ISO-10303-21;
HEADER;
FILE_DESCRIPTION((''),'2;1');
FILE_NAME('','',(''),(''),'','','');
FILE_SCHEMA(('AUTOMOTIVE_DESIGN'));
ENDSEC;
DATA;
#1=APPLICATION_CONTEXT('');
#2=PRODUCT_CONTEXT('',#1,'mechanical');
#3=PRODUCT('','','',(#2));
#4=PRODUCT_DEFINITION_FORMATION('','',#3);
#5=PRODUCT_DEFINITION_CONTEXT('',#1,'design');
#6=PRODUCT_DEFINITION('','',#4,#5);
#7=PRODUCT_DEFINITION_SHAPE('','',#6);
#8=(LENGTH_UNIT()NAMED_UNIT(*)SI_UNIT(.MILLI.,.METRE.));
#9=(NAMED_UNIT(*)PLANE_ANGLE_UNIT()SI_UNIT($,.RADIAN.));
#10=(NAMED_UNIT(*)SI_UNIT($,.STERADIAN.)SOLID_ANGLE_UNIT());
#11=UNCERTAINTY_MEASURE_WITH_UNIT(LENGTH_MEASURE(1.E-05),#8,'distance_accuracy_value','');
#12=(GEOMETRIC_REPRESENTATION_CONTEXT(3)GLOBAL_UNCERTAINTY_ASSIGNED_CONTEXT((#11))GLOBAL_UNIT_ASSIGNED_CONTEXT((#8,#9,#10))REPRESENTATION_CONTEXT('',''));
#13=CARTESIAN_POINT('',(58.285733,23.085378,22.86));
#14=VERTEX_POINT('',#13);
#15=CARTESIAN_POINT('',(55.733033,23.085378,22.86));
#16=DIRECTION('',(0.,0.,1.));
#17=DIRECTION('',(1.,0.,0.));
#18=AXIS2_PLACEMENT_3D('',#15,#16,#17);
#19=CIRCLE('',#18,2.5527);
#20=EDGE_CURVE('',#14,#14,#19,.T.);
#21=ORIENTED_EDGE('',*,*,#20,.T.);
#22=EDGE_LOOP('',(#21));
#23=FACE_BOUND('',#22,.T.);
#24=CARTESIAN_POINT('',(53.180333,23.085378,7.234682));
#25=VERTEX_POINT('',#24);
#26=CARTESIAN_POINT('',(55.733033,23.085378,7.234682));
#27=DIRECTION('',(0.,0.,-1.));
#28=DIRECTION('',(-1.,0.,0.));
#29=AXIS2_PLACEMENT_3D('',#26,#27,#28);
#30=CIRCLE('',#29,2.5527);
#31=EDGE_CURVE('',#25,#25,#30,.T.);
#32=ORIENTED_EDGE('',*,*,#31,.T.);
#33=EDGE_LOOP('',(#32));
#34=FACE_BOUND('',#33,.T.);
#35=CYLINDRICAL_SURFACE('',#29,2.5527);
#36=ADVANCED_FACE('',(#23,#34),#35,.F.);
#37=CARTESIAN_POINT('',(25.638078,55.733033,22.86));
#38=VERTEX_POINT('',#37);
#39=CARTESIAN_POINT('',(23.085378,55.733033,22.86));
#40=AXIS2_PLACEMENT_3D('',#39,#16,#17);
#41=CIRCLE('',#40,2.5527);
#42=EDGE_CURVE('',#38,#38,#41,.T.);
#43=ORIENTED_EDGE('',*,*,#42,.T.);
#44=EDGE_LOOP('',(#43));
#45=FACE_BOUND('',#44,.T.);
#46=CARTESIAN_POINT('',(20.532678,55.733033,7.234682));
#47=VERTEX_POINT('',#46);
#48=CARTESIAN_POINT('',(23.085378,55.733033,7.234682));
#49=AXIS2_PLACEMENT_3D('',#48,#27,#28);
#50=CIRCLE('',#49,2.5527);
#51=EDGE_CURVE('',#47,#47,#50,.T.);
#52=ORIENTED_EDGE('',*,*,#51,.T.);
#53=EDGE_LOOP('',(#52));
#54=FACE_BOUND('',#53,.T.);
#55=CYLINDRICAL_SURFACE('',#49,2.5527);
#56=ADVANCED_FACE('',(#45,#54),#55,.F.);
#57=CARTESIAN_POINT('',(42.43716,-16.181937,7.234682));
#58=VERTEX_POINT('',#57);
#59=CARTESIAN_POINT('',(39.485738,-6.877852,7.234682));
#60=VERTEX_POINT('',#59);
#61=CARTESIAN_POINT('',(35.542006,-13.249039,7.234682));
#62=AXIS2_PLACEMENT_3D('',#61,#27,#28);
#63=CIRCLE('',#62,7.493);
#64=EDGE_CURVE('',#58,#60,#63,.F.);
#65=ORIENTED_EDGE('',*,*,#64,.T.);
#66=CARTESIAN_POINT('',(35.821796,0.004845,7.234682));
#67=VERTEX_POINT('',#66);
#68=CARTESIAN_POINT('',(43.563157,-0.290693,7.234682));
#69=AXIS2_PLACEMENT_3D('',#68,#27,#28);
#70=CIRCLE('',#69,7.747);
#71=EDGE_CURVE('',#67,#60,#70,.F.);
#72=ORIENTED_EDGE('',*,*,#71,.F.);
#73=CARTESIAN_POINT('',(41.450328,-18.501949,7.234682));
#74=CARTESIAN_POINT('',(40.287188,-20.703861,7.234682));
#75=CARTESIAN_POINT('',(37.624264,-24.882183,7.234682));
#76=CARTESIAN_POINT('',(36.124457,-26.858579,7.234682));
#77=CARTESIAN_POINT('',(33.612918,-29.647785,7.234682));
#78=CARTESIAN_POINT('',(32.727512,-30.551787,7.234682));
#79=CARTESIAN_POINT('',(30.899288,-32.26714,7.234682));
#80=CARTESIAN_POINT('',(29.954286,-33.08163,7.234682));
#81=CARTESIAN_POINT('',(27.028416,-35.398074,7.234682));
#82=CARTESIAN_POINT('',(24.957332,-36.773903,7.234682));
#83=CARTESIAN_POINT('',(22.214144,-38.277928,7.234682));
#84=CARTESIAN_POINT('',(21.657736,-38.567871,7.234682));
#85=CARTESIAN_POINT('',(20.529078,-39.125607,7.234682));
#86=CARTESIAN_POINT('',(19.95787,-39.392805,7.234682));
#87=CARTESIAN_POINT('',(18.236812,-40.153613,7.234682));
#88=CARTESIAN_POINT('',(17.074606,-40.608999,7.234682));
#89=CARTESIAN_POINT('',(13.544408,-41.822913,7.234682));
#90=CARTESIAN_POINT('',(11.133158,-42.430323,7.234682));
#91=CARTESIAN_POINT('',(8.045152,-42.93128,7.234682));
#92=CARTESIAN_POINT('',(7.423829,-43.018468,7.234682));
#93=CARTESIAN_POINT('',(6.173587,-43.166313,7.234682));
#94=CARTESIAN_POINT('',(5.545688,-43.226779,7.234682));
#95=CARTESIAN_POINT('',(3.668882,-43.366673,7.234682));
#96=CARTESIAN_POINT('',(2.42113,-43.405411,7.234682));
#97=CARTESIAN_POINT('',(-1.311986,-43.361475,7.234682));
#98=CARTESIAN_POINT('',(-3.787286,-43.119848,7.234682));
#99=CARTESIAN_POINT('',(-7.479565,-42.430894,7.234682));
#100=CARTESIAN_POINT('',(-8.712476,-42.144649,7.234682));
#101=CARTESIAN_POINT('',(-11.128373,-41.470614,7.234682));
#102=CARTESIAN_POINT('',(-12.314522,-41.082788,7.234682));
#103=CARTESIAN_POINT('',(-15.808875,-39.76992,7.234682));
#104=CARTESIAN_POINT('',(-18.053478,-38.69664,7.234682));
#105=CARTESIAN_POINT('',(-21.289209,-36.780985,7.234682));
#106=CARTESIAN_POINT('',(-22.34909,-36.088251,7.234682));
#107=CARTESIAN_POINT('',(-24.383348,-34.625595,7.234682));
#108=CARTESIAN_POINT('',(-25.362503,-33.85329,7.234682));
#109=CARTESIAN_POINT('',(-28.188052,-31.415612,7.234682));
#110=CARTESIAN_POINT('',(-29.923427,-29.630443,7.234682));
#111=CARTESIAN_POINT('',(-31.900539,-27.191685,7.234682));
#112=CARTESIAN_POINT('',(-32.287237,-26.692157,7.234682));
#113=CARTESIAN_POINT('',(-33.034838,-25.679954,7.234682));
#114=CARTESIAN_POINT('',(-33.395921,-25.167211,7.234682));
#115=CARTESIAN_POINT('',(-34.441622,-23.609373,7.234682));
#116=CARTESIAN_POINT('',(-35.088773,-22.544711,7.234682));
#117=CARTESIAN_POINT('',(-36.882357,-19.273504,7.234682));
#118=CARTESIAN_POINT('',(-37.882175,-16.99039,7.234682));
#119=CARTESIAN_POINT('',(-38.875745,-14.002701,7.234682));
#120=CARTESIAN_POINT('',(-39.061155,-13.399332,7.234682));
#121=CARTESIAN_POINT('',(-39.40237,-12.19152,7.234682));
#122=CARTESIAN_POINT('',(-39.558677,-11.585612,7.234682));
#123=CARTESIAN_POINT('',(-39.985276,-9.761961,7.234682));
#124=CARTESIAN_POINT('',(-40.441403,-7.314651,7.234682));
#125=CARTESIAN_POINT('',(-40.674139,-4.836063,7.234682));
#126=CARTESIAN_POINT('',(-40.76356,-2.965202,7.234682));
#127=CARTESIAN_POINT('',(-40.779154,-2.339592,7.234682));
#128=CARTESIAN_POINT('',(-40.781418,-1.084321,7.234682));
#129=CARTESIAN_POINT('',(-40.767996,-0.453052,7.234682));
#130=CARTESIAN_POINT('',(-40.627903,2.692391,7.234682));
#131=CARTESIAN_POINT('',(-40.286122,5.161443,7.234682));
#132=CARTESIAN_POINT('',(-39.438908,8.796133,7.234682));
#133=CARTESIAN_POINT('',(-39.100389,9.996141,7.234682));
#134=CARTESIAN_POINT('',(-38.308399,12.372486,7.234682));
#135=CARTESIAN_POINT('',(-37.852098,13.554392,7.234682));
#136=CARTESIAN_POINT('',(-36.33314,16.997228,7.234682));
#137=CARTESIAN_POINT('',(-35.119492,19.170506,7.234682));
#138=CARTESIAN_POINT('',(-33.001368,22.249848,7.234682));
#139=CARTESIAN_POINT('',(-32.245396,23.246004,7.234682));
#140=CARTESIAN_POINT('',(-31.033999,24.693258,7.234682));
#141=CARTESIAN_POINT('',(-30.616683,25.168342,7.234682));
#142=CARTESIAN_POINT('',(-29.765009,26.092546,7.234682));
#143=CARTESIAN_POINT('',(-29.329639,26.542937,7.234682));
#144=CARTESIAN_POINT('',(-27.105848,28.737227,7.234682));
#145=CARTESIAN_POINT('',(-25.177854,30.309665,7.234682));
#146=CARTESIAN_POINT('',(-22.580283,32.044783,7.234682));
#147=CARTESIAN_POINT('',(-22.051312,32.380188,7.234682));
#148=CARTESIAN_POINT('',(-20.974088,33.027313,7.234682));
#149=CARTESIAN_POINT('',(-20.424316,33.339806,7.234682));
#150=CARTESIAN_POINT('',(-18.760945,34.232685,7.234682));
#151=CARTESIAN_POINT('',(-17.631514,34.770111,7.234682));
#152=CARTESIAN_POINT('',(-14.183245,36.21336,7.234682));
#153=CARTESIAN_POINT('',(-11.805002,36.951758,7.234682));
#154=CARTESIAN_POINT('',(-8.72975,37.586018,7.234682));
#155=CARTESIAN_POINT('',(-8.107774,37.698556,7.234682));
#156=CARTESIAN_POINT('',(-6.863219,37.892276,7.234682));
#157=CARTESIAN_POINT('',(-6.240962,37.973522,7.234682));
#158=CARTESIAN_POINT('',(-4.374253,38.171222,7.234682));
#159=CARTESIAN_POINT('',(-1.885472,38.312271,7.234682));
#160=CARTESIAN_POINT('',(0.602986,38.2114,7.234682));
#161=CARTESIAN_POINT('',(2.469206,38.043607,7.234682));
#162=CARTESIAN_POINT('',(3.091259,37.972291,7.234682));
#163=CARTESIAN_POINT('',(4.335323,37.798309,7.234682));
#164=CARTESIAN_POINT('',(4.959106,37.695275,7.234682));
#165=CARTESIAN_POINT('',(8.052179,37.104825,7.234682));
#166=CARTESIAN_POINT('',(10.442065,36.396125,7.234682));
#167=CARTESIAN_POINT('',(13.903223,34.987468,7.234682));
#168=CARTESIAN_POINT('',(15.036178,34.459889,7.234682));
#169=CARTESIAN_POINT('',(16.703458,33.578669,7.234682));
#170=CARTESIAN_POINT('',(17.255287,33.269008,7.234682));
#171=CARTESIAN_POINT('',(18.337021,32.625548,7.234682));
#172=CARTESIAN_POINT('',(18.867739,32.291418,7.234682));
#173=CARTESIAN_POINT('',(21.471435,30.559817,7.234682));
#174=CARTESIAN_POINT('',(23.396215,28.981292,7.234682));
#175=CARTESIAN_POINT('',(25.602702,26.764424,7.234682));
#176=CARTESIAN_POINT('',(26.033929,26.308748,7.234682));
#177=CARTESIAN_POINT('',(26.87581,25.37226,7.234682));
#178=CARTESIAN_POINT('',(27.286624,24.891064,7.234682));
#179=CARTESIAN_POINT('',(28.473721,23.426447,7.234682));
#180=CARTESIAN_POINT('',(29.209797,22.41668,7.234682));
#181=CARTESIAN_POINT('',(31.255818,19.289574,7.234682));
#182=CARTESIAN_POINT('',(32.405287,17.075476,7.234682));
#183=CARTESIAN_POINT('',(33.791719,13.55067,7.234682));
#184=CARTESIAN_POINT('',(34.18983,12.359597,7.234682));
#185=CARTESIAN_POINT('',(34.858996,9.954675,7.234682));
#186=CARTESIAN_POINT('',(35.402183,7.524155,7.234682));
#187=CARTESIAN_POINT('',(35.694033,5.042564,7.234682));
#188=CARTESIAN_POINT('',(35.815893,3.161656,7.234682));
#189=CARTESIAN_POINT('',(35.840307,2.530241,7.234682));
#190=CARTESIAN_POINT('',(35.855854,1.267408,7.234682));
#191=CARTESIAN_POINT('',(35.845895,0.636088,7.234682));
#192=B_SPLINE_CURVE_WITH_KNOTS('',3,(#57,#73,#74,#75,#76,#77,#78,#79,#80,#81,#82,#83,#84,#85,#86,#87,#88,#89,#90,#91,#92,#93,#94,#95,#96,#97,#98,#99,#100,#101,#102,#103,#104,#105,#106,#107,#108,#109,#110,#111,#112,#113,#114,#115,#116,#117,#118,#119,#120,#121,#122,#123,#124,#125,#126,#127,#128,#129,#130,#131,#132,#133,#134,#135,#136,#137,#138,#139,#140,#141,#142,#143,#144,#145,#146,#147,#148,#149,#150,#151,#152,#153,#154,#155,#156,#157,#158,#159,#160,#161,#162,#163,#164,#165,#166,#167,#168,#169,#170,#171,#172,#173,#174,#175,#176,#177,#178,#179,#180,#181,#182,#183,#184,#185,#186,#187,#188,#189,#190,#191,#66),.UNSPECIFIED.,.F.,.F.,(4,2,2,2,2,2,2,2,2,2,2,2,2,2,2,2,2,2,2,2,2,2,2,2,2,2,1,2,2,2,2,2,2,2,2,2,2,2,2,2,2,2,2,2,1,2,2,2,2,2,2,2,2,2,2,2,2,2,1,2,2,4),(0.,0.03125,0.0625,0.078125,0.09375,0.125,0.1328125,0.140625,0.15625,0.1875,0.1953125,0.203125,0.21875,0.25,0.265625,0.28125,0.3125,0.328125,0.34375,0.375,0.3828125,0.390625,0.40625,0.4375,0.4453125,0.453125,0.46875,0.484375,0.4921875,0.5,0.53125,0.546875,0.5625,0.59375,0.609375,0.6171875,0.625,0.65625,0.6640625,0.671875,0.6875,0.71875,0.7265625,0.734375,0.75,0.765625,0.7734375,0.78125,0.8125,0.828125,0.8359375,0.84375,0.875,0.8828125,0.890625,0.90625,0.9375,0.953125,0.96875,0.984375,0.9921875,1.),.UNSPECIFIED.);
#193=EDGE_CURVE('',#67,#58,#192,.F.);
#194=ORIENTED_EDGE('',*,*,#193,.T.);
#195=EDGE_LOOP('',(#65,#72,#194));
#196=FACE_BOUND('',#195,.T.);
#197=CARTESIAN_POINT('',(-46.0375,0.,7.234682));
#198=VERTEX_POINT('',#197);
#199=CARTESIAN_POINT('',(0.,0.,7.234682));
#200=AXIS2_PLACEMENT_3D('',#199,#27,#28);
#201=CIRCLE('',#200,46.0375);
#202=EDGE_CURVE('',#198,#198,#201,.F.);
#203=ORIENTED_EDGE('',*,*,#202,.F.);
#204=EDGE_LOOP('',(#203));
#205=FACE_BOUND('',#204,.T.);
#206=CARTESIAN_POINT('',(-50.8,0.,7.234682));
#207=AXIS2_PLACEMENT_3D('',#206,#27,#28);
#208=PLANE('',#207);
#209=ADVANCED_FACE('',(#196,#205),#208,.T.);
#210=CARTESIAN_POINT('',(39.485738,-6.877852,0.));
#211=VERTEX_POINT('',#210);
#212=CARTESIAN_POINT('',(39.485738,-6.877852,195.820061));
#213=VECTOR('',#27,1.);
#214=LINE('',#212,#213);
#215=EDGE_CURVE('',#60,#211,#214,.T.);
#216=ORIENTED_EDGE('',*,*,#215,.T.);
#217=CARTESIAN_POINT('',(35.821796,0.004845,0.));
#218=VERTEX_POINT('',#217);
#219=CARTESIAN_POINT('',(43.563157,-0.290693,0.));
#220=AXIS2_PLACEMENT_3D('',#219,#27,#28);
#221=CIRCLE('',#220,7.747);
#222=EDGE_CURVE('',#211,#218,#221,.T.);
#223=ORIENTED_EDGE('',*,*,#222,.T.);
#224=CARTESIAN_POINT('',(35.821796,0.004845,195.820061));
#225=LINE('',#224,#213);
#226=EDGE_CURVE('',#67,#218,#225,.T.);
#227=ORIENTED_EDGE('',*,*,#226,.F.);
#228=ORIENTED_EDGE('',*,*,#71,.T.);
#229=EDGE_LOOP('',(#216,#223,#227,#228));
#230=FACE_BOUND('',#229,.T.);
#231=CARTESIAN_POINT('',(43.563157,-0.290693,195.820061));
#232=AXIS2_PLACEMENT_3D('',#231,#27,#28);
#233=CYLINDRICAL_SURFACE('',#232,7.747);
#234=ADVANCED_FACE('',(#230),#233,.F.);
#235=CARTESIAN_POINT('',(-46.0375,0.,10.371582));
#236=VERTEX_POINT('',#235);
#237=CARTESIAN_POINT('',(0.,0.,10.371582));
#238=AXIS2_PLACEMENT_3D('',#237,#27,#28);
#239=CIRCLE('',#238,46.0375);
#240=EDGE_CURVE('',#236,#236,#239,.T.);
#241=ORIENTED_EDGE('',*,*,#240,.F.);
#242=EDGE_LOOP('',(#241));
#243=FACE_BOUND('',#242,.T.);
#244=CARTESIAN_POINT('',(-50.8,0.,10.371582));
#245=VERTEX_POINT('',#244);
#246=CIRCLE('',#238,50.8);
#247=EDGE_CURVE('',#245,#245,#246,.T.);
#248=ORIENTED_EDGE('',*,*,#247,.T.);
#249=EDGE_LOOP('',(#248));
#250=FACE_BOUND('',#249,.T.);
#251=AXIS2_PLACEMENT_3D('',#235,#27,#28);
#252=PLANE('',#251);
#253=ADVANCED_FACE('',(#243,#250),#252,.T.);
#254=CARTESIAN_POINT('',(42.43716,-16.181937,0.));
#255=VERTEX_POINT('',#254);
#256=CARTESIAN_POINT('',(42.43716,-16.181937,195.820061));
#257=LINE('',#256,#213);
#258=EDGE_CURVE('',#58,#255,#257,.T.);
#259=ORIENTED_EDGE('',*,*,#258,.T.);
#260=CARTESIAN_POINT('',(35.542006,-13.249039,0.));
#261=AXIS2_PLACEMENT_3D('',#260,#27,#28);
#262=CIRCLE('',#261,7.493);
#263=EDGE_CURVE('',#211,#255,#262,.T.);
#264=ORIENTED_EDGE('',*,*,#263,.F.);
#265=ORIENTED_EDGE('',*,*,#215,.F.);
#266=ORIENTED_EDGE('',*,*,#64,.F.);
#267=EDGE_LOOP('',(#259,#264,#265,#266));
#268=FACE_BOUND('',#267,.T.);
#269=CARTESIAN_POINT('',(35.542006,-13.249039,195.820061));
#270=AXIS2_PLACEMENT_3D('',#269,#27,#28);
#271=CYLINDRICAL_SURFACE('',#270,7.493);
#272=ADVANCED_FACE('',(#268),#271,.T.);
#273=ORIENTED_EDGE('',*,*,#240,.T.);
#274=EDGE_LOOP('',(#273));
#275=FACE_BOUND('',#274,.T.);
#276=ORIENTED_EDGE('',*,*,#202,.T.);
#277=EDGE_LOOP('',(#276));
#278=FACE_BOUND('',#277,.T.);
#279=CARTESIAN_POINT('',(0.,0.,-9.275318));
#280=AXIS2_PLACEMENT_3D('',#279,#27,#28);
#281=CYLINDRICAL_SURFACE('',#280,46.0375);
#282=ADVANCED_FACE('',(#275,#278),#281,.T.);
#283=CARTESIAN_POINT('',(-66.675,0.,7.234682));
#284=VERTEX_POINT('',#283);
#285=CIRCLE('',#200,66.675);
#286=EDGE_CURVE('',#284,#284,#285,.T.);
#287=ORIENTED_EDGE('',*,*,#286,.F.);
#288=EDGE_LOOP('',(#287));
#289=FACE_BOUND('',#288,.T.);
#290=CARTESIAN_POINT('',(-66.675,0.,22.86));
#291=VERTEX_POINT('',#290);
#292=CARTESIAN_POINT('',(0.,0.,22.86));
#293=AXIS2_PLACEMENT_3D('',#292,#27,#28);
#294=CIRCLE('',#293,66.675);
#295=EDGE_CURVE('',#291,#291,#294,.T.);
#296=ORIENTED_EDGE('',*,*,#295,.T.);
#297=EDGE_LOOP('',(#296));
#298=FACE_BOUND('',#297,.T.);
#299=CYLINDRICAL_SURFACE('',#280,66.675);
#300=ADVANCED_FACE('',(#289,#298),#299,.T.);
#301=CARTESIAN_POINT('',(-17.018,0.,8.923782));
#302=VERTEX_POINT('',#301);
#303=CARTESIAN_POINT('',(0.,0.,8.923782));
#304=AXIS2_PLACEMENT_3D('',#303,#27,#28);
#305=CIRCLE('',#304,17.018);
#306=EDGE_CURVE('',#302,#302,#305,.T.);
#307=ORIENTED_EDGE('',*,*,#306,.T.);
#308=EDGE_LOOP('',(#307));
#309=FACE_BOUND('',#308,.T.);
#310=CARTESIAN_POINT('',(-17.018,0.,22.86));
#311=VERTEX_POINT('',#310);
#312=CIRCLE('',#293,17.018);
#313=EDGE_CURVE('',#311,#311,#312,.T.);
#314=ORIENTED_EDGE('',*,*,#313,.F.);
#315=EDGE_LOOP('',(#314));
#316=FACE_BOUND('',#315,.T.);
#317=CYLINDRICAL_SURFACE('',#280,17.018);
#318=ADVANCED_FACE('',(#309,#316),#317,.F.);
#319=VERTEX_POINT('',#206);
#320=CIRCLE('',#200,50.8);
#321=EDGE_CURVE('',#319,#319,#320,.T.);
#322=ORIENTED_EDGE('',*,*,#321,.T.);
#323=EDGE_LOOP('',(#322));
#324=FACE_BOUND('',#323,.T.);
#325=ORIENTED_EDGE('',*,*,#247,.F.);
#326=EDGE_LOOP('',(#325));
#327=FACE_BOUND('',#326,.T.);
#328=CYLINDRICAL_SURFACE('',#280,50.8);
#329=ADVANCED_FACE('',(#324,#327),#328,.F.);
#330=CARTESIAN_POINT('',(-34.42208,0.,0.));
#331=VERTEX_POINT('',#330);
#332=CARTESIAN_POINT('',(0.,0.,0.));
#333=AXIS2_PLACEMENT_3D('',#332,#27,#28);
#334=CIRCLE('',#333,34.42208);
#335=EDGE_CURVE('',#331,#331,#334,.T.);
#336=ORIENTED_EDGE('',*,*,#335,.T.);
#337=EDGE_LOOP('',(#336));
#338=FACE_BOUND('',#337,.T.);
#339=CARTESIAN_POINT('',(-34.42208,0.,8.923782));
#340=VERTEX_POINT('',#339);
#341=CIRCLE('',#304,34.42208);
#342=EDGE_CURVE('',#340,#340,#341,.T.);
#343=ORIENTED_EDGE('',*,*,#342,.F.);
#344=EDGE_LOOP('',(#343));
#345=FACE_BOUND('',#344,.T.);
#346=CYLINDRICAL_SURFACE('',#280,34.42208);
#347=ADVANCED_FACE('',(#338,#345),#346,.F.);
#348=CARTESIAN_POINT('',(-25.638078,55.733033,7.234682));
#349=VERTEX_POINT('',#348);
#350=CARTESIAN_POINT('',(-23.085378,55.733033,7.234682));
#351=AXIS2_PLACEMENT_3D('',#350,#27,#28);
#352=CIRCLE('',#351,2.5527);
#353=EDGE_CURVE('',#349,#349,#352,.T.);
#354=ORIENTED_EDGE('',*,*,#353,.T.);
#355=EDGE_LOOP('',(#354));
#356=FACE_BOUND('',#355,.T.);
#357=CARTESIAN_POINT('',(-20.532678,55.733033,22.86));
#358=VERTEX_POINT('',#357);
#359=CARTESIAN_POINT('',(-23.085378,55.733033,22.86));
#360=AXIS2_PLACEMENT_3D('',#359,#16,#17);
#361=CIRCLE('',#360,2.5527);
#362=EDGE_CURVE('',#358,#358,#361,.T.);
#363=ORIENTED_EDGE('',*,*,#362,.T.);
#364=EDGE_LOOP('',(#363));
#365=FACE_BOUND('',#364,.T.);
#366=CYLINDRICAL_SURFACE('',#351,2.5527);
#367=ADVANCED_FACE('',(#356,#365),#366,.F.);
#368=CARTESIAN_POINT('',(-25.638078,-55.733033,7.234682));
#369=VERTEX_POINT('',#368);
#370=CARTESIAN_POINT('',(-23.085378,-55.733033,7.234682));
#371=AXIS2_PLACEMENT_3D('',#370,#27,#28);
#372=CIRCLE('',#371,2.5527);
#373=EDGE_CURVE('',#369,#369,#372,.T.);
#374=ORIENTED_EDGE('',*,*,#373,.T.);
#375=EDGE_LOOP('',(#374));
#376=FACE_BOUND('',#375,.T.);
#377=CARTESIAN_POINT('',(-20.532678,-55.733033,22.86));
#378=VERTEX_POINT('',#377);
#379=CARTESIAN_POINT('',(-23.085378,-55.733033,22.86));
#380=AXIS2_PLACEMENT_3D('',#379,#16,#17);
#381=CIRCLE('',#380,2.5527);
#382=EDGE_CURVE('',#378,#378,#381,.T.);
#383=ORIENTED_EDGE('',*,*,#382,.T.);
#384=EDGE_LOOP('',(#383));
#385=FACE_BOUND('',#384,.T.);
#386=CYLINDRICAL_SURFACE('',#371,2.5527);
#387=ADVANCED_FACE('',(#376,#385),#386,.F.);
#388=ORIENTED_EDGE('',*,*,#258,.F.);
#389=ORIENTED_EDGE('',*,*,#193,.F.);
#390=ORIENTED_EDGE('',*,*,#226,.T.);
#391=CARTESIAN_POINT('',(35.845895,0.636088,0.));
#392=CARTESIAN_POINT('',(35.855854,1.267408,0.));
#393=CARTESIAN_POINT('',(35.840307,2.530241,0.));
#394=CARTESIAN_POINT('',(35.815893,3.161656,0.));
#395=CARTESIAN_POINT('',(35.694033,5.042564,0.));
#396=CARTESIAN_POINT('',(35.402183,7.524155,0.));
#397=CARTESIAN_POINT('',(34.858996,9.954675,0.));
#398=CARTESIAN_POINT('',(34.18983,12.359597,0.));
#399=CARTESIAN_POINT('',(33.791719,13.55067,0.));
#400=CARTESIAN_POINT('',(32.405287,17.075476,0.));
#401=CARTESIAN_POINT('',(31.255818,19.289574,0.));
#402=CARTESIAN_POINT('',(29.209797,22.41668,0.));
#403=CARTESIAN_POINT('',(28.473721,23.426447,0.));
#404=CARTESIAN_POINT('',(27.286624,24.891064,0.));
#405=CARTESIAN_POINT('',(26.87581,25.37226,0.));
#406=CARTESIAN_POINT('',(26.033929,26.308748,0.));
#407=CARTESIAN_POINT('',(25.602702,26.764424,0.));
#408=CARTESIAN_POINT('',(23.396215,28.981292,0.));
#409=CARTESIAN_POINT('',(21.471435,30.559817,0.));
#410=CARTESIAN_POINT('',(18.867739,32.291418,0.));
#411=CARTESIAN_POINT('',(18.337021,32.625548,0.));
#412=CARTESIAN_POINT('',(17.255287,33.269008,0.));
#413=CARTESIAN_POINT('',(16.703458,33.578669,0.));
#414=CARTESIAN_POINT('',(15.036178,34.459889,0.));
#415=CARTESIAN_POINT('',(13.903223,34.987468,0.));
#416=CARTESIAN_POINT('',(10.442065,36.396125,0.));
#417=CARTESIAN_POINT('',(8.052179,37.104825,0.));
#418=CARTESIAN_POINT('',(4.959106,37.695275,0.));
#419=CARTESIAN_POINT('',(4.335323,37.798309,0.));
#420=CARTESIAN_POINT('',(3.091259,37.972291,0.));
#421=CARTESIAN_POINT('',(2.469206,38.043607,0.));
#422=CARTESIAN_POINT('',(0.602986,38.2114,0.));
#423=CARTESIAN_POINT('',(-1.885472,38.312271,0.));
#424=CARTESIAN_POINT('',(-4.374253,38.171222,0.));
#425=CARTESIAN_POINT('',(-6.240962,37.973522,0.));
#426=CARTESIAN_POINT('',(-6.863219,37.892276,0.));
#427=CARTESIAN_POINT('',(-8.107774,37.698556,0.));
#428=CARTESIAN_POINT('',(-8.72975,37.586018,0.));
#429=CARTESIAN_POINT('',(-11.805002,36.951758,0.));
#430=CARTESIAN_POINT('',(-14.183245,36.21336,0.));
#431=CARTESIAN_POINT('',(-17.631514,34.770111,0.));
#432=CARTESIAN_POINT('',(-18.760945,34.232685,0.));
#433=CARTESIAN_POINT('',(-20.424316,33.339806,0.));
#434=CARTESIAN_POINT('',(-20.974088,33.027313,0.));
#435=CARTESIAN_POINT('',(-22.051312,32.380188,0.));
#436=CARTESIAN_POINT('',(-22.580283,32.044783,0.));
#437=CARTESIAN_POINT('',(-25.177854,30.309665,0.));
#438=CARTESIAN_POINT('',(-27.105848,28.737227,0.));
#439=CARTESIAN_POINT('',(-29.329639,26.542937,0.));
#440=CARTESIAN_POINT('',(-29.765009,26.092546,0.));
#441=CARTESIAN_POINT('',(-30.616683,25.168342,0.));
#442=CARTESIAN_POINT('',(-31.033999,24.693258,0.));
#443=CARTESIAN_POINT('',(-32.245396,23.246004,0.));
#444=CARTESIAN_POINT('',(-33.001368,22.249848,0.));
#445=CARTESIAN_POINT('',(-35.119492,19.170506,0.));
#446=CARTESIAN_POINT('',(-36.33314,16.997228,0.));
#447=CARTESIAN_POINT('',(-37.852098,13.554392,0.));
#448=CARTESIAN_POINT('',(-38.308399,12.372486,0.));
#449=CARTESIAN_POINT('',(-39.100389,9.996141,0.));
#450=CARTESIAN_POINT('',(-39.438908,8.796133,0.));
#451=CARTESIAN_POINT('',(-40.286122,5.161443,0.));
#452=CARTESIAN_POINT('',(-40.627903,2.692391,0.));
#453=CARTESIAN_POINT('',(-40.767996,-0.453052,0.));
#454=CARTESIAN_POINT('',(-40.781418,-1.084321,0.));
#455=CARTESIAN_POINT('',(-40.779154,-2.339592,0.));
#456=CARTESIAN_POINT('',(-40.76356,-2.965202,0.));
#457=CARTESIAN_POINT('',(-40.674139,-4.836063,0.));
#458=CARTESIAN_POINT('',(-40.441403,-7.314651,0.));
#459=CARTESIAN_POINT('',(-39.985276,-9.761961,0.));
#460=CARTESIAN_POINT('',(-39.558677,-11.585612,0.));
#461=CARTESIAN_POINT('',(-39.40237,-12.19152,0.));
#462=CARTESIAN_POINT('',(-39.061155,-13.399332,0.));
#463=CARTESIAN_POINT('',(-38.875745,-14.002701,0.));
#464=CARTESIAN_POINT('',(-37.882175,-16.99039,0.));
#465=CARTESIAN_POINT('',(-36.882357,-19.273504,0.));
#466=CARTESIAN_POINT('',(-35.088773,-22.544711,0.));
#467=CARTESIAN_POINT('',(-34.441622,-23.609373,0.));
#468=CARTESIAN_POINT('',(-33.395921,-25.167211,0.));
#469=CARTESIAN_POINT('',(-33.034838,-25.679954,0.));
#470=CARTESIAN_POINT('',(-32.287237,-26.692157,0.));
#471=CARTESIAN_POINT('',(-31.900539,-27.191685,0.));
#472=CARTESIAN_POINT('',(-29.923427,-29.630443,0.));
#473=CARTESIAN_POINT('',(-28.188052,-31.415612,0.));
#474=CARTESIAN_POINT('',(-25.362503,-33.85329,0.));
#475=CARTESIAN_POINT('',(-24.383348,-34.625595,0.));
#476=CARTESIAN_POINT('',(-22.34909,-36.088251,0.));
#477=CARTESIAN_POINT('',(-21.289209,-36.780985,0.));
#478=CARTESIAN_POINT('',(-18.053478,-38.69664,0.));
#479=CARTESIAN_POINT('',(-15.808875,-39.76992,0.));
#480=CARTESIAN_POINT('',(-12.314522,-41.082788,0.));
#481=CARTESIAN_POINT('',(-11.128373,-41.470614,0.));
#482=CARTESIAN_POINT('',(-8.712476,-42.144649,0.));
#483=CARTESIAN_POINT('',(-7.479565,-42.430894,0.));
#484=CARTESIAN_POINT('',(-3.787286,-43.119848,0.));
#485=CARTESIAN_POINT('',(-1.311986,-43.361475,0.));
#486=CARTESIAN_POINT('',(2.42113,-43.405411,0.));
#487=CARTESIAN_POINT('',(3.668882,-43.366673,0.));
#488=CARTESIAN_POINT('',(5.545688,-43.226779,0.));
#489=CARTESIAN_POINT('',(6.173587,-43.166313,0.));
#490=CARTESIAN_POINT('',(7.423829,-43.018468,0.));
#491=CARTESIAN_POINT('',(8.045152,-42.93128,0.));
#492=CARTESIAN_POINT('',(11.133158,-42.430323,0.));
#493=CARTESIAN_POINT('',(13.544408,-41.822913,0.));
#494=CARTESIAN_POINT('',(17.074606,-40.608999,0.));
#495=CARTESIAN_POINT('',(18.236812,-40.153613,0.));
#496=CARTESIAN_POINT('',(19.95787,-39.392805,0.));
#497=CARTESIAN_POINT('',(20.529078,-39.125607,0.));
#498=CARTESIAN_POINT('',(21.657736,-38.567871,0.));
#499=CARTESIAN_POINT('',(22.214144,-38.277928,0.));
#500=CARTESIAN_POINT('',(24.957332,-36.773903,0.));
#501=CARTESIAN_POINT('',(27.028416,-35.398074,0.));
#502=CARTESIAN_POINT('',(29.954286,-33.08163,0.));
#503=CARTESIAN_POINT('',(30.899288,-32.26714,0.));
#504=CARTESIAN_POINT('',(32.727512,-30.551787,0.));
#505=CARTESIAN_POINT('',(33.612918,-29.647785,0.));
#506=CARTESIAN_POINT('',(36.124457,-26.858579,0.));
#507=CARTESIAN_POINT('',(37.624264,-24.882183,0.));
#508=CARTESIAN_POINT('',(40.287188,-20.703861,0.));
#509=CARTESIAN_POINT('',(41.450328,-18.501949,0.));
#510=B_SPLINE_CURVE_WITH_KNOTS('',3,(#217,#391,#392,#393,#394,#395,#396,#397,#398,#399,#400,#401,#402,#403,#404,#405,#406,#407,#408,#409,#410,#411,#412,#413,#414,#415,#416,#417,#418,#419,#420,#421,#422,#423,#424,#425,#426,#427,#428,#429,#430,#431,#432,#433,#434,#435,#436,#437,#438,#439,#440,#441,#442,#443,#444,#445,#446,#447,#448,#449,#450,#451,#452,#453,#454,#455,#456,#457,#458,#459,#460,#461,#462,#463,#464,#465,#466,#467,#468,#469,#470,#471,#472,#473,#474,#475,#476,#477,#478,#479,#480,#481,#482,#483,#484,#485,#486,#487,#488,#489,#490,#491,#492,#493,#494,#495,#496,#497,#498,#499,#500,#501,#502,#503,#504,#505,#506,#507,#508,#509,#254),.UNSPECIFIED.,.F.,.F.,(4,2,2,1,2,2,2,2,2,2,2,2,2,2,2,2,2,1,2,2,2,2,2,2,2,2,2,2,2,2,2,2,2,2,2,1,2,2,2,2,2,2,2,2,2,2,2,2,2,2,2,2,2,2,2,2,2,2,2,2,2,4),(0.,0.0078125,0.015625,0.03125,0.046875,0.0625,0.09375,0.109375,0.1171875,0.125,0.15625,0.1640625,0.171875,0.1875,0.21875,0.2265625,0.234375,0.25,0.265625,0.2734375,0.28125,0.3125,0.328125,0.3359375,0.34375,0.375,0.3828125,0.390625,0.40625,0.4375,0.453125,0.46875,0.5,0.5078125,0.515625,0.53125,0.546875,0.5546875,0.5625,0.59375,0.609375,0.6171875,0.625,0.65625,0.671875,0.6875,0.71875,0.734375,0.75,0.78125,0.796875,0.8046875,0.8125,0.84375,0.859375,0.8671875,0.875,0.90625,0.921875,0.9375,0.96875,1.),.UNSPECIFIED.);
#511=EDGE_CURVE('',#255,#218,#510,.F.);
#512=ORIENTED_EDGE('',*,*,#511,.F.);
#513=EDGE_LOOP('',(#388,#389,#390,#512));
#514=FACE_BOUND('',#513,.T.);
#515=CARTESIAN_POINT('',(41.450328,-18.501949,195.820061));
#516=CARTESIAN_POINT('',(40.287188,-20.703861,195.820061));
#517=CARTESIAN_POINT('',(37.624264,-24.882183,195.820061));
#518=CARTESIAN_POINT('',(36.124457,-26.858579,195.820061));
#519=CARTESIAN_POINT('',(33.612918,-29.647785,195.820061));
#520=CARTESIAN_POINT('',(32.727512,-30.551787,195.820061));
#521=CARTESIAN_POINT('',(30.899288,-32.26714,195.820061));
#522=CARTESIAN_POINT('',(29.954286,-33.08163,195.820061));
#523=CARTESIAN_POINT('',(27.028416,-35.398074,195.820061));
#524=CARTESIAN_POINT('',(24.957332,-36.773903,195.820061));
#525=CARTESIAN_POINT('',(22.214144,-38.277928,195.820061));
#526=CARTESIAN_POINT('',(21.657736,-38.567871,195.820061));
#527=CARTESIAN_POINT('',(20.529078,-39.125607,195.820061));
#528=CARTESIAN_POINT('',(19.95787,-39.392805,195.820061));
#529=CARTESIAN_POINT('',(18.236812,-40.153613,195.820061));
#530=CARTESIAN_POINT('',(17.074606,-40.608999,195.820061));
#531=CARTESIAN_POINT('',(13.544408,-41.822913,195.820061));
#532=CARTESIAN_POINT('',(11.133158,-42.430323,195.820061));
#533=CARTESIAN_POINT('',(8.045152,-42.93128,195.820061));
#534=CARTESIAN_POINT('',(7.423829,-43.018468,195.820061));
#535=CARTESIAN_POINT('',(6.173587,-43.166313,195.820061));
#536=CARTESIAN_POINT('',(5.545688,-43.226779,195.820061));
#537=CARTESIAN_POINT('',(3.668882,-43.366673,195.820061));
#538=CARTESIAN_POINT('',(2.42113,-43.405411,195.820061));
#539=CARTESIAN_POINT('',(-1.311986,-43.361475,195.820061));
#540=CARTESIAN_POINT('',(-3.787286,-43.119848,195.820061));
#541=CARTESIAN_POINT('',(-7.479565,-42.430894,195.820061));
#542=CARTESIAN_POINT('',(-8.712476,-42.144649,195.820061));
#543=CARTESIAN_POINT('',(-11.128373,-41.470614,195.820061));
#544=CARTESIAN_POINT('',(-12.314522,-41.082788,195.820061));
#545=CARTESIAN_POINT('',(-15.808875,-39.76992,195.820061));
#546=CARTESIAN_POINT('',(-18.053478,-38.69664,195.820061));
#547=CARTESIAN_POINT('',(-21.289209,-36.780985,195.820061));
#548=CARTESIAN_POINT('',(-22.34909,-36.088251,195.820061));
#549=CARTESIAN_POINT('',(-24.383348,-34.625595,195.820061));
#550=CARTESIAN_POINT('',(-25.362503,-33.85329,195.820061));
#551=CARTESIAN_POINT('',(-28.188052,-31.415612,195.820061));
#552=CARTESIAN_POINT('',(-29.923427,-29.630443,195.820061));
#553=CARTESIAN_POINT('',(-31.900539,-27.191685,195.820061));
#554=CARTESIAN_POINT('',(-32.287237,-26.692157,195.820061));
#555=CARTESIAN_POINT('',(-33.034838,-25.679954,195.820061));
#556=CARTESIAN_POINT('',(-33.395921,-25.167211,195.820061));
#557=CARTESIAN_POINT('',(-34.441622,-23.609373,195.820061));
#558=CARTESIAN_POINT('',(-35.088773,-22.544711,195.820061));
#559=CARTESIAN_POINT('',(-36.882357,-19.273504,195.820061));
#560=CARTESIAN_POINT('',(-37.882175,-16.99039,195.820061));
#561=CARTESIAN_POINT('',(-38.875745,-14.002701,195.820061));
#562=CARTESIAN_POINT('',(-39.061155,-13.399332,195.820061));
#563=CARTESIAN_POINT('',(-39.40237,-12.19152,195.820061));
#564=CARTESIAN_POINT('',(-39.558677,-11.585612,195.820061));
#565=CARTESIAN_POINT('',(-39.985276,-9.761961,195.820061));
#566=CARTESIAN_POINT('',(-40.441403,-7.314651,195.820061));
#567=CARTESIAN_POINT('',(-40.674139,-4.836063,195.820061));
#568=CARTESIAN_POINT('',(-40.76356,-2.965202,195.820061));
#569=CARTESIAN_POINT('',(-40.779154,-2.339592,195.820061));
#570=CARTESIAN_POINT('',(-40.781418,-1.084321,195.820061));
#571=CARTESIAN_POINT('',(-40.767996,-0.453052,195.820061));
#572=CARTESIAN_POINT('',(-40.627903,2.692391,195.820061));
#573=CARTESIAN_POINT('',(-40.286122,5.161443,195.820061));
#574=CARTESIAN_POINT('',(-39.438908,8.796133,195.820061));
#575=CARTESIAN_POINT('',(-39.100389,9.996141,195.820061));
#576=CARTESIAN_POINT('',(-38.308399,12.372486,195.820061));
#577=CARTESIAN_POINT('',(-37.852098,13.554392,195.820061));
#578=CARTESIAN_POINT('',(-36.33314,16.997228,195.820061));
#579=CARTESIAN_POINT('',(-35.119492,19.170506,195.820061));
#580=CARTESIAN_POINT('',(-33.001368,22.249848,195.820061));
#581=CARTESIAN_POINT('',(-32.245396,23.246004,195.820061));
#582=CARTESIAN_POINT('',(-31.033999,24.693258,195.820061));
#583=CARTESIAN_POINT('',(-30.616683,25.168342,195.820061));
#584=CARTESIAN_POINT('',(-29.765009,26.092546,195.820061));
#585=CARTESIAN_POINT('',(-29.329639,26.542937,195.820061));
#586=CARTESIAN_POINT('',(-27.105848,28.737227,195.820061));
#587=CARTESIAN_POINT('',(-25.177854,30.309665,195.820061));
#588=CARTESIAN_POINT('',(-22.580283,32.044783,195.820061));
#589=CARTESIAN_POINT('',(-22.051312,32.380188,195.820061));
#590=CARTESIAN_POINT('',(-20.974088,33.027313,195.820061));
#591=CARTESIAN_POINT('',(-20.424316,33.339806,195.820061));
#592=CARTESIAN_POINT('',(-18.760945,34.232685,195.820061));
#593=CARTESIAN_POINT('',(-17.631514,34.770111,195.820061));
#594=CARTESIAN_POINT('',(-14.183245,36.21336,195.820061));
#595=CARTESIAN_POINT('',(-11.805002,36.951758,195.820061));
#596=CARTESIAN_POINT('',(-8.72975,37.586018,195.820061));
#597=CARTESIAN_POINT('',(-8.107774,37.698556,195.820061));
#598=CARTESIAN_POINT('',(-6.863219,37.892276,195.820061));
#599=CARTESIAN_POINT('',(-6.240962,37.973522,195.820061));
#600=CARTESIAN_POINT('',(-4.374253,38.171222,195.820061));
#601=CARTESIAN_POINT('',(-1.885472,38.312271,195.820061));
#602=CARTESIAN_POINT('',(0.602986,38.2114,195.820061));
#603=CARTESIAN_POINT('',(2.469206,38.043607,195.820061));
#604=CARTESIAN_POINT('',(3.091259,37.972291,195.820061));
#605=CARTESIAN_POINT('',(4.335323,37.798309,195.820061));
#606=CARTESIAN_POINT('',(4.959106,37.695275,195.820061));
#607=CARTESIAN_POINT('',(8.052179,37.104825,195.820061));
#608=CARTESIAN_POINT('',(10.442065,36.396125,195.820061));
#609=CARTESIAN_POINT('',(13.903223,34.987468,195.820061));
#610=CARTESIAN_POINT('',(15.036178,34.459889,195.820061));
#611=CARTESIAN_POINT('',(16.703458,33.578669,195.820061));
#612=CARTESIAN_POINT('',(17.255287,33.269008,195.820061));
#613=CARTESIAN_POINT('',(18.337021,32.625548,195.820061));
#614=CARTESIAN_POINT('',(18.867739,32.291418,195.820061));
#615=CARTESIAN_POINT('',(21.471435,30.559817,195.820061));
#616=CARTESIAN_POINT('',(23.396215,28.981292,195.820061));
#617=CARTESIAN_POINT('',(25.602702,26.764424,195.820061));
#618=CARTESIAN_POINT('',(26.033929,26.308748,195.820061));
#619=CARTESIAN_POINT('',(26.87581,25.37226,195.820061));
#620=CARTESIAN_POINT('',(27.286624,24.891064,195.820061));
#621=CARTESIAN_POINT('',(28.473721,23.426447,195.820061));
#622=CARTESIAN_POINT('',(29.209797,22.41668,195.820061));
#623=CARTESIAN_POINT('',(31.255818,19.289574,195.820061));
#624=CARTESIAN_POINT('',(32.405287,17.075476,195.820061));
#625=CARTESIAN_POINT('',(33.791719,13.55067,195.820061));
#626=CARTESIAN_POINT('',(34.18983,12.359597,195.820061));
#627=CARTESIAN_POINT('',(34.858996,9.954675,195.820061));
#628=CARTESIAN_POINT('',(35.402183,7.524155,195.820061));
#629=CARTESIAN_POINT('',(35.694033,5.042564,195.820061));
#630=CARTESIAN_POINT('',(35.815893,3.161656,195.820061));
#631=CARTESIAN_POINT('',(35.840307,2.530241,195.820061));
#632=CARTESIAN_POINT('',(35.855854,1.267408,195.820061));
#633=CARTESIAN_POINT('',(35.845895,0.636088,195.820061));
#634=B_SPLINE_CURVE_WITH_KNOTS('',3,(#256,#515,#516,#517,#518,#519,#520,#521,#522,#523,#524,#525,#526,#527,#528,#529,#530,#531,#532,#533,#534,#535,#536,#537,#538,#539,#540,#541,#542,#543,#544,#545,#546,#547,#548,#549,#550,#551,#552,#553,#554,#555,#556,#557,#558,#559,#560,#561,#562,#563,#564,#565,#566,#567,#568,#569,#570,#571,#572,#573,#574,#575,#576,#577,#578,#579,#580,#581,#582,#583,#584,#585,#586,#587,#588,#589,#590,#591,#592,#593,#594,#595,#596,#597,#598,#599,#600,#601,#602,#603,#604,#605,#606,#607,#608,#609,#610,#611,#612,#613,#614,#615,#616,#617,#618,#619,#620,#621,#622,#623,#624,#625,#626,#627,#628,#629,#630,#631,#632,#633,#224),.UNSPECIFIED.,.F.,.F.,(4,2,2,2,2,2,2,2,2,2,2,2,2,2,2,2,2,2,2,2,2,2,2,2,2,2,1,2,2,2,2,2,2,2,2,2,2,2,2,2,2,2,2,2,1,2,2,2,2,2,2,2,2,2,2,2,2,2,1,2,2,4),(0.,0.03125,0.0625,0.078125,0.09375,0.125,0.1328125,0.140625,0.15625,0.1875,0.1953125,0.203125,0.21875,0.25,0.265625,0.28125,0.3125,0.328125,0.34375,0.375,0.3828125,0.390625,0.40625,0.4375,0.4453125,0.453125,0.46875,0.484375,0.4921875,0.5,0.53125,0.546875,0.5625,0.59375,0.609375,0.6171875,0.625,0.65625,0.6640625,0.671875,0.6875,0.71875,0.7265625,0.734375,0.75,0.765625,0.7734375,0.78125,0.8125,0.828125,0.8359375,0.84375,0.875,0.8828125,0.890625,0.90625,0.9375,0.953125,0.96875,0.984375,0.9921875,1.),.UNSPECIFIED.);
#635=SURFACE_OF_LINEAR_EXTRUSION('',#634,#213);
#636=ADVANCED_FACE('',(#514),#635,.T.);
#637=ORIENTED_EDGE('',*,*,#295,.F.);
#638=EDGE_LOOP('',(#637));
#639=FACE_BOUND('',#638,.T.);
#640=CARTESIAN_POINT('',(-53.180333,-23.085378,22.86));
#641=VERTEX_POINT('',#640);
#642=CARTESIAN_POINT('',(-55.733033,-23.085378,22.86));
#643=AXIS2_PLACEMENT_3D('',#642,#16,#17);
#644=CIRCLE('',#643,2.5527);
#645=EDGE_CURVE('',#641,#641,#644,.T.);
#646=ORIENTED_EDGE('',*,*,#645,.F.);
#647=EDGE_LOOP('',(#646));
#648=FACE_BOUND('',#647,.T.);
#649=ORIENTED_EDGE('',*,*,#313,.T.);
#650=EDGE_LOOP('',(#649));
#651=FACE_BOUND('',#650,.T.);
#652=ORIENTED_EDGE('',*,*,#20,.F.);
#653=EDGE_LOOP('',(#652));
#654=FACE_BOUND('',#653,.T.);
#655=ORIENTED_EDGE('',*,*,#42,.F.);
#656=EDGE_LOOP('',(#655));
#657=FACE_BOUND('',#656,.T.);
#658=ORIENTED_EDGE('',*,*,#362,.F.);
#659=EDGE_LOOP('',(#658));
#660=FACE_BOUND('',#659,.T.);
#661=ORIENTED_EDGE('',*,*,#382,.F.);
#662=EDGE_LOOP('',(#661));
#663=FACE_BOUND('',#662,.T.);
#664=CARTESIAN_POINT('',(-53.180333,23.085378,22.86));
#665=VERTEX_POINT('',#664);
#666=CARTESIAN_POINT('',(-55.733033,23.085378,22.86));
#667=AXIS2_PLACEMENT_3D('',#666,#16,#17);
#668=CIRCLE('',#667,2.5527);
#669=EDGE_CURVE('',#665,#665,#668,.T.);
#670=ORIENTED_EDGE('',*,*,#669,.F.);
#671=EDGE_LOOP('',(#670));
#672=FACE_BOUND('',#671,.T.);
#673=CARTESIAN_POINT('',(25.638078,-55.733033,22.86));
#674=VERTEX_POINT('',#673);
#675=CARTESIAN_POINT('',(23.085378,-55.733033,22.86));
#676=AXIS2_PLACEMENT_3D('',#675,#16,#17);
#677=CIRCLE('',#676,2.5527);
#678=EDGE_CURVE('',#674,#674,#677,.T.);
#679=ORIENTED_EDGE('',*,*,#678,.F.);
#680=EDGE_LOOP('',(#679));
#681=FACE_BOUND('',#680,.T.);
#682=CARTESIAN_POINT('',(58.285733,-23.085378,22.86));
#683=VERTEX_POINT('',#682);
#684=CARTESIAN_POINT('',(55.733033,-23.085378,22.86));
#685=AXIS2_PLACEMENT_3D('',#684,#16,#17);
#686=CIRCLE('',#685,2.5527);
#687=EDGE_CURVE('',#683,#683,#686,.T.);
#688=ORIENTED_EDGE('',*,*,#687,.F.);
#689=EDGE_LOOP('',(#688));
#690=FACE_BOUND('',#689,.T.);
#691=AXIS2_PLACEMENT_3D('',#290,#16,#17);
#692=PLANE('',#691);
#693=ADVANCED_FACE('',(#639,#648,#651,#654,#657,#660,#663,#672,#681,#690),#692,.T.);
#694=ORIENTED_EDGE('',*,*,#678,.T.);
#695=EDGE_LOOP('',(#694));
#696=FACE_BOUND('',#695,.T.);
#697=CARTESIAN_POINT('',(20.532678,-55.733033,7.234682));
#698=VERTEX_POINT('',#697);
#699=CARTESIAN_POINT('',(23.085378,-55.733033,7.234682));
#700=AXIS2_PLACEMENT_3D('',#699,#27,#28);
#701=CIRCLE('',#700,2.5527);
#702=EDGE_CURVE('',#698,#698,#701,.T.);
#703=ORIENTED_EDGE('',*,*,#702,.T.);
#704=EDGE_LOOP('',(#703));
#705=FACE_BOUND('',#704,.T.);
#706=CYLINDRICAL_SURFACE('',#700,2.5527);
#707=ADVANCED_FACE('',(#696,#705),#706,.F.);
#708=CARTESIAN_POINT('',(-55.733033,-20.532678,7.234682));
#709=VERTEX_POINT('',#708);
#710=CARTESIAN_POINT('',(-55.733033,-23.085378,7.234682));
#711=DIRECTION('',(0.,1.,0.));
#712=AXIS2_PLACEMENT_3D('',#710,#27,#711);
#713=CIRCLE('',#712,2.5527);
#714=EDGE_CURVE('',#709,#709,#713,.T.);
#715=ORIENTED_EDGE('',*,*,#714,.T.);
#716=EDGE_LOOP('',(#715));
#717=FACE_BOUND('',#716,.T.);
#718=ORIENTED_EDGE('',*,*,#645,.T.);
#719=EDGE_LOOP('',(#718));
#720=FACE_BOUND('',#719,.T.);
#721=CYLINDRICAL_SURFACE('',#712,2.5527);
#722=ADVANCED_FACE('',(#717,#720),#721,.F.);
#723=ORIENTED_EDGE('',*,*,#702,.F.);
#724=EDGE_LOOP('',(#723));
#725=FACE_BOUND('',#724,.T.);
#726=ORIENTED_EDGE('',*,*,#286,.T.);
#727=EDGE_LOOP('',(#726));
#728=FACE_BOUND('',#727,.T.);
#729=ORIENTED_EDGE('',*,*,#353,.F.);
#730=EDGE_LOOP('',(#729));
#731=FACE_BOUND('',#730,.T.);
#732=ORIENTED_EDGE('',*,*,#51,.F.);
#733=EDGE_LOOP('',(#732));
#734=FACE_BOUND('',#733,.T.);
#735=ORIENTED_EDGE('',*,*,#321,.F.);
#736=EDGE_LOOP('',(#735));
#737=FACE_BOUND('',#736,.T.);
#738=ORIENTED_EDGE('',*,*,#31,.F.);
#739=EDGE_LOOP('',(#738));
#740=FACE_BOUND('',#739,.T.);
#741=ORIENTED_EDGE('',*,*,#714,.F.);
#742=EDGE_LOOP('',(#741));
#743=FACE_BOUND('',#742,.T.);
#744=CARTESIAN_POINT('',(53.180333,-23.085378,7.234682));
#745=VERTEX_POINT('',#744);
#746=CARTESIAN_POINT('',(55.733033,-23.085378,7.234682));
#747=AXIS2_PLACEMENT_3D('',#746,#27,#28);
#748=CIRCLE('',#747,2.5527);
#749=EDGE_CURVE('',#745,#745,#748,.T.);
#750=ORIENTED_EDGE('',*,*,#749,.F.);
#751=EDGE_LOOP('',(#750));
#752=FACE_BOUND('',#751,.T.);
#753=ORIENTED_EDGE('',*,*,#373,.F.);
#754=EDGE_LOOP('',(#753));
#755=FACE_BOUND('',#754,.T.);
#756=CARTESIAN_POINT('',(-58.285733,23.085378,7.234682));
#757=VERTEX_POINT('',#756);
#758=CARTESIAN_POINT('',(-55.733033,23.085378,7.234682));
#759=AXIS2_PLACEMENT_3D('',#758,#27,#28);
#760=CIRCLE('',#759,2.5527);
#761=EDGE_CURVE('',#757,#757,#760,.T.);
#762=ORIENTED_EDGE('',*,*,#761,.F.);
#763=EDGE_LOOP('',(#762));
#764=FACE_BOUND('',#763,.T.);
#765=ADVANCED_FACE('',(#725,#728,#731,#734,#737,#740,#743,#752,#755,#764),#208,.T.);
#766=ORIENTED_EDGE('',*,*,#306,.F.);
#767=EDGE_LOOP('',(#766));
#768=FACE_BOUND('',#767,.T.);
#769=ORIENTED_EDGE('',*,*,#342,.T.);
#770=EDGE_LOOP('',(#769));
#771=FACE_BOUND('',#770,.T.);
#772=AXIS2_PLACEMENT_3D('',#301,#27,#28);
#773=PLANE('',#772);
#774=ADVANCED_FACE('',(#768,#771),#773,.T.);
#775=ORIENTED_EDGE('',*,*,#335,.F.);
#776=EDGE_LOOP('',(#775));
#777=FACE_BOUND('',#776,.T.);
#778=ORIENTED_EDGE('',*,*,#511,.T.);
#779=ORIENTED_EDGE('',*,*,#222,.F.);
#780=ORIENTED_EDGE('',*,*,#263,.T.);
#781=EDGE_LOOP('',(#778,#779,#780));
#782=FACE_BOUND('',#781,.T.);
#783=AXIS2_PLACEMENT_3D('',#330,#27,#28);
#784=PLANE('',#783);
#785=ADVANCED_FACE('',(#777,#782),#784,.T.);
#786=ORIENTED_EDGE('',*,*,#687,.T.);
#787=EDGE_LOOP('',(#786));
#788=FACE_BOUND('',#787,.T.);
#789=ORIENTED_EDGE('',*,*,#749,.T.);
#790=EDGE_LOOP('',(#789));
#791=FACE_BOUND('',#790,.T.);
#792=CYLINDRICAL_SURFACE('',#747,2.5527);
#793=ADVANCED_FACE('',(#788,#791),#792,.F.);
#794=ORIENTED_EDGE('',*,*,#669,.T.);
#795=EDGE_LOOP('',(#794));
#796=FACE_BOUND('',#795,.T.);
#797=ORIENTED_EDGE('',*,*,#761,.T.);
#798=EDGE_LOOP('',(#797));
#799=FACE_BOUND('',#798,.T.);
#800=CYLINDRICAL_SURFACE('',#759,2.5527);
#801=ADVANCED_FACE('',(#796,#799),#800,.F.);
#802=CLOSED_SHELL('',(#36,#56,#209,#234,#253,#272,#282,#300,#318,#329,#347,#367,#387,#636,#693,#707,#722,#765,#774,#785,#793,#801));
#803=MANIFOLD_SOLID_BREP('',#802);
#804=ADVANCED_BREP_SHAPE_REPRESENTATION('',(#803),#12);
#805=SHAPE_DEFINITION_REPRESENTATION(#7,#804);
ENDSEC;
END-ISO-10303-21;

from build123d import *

# Parameters (mm, degrees)
CUT_EXTRUDE2_OUTLINE_R = 47.625
CUT_EXTRUDE2_DEPTH     = 7.234682
F_10_CLEARANCE_HOLE1_D = 5.1054
CIRPATTERN1_COUNT      = 8
CLEARANCING_START      = -7.234682
SKETCH25_R             = 66.675
CLEARANCING_DEPTH      = 7.234682


# Read off the part's stored shape, not the designer's step: Cut-Extrude2
with BuildPart() as part:
    # Sketch24 → Revolve1 (revolve)
    with BuildSketch(Plane(origin=(0, 0, 0), x_dir=(1, 0, 0), z_dir=(0, 1, 0))):
        Polygon((-17.018, -22.86), (-17.018, -8.923782), (-34.42208, -8.923782), (-34.42208, 0), (-47.625, 0), (-47.625, -7.234682), (-46.0375, -7.234682), (-46.0375, -10.371582), (-50.8, -10.371582), (-50.8, -7.234682), (-66.675, -7.234682), (-66.675, -22.86), align=None)
    revolve(axis=Axis((0, 0, -9.275318), (0, 0, 1)))

    # Cut-Extrude2 outline → Cut-Extrude2 (cut)
    with BuildSketch(Plane.XY):
        Circle(CUT_EXTRUDE2_OUTLINE_R)
        with BuildLine():
            add(Edge.make_bspline(
                [(35.948703812, 0), (35.9515816, 0.07538119), (35.957337916, 0.226162951), (35.964207937, 0.452426553), (35.969771157, 0.678783022), (35.978029534, 1.131847853), (35.980843708, 2.190601907), (35.920311441, 3.779931016), (35.747323363, 5.668216834), (35.489928088, 7.474298946), (35.141459932, 9.268877369), (34.702390603, 11.047358984), (34.17343386, 12.80516853), (33.555538624, 14.537761538), (32.849887572, 16.240636382), (32.057893687, 17.909346365), (31.181197352, 19.53951152), (30.221662701, 21.126830276), (29.181373626, 22.667090912), (28.062629225, 24.156182809), (26.867938753, 25.590107465), (25.60001603, 26.964989265), (24.261773335, 28.277085961), (22.856314773, 29.522798851), (21.386929147, 30.698682629), (19.85708232, 31.801454876), (18.270409111, 32.828005175), (16.630704717, 33.775403815), (14.941915703, 34.640910073), (13.208130556, 35.421980041), (11.43356985, 36.116273987), (9.622576022, 36.721663214), (7.779602801, 37.236236415), (5.909204301, 37.658305492), (4.016023818, 37.986410831), (2.104782347, 38.219326014), (0.180266852, 38.356061949), (-1.75268168, 38.395870413), (-3.689180377, 38.338246992), (-5.624316777, 38.182933409), (-7.553161251, 37.929919231), (-9.470779522, 37.579442948), (-11.37224525, 37.131992419), (-13.252652651, 36.588304682), (-15.107129112, 35.949365124), (-16.930847778, 35.216406011), (-18.719040078, 34.390904381), (-20.467008144, 33.474579298), (-22.170137115, 32.469388481), (-23.823907266, 31.377524301), (-25.42390596, 30.201409162), (-26.965839357, 28.943690275), (-28.445543888, 27.607233836), (-29.858997424, 26.195118613), (-31.202330147, 24.710628968), (-32.471835063, 23.157247319), (-33.663978152, 21.538646066), (-34.775408104, 19.858679), (-35.802965645, 18.121372202), (-36.743692396, 16.330914471), (-37.594839261, 14.491647299), (-38.353874308, 12.608054401), (-39.018490139, 10.68475085), (-39.586610697, 8.726471825), (-40.056397525, 6.738061006), (-40.426255434, 4.724458642), (-40.694837576, 2.690689328), (-40.861049894, 0.641849508), (-40.924054953, -1.416905249), (-40.883275123, -3.480373184), (-40.738395114, -5.543319447), (-40.489363842, -7.600489337), (-40.13639564, -9.646621653), (-39.679970776, -11.676462103), (-39.120835312, -13.684776759), (-38.460000265, -15.666365517), (-37.698740094, -17.61607551), (-36.838590511, -19.528814477), (-35.881345602, -21.399564006), (-34.829054288, -23.223392663), (-33.684016107, -24.995468936), (-32.44877635, -26.711073982), (-31.126120537, -28.365614138), (-29.719068263, -29.954633155), (-28.230866416, -31.473824138), (-26.664981791, -32.919041144), (-25.025093105, -34.286310417), (-23.315082441, -35.571841228), (-21.53902614, -36.772036288), (-19.701185153, -37.883501708), (-17.805994889, -38.903056478), (-15.85805457, -39.827741435), (-13.862116128, -40.654827709), (-11.823072667, -41.381824596), (-9.745946518, -42.006486871), (-7.635876912, -42.526821485), (-5.498107312, -42.941093656), (-3.337972426, -43.247832311), (-1.160884928, -43.445834888), (1.027678058, -43.534171454), (3.222188708, -43.512188152), (5.417082419, -43.379509955), (7.606771886, -43.136042707), (9.785661288, -42.781974466), (11.948160555, -42.317776118), (14.08869967, -41.74420128), (16.201742982, -41.062285471), (18.281803484, -40.273344558), (20.323457017, -39.378972487), (22.321356376, -38.381038284), (24.27024527, -37.281682345), (26.164972102, -36.083312015), (28.000503535, -34.788596469), (29.77193781, -33.400460899), (31.474517775, -31.92208003), (33.103643596, -30.356870964), (34.654885111, -28.708485383), (36.123993806, -26.980801118), (37.506914359, -25.17791311), (38.799795742, -23.304123775), (39.999001844, -21.363932809), (41.101121576, -19.362026441), (41.938186302, -17.641904891), (42.402189205, -16.588613759), (42.554027377, -16.231646763)],
                knots=[0, 0, 0, 0, 0.000879209, 0.001758645, 0.002638305, 0.003518191, 0.007039982, 0.014977213, 0.022047939, 0.029133237, 0.036233164, 0.043347773, 0.050477114, 0.057621232, 0.06478017, 0.071953969, 0.079142669, 0.086346306, 0.093564916, 0.100798534, 0.108047194, 0.115310927, 0.122589766, 0.12988374, 0.13719288, 0.144517215, 0.151856774, 0.159211583, 0.16658167, 0.173967063, 0.181367786, 0.188783866, 0.196215328, 0.203662198, 0.211124498, 0.218602253, 0.226095488, 0.233604225, 0.241128486, 0.248668296, 0.256223676, 0.263794648, 0.271381234, 0.278983456, 0.286601335, 0.294234891, 0.301884146, 0.309549121, 0.317229835, 0.324926308, 0.332638561, 0.340366614, 0.348110485, 0.355870195, 0.363645762, 0.371437205, 0.379244543, 0.387067795, 0.39490698, 0.402762115, 0.410633219, 0.41852031, 0.426423405, 0.434342523, 0.442277682, 0.450228898, 0.458196189, 0.466179572, 0.474179065, 0.482194684, 0.490226447, 0.498274369, 0.506338468, 0.514418761, 0.522515263, 0.530627991, 0.538756962, 0.546902191, 0.555063694, 0.563241488, 0.571435588, 0.57964601, 0.58787277, 0.596115883, 0.604375364, 0.61265123, 0.620943495, 0.629252175, 0.637577285, 0.64591884, 0.654276855, 0.662651345, 0.671042324, 0.679449808, 0.687873812, 0.696314349, 0.704771435, 0.713245083, 0.721735309, 0.730242127, 0.738765551, 0.747305595, 0.755862273, 0.7644356, 0.77302559, 0.781632256, 0.790255613, 0.798895674, 0.807552454, 0.816225965, 0.824916222, 0.833623239, 0.842347028, 0.851087604, 0.859844979, 0.868619169, 0.877410184, 0.88621804, 0.895042749, 0.903884325, 0.912742781, 0.921618129, 0.930510383, 0.935031581, 0.935031581, 0.935031581, 0.935031581], degree=3))
            ThreePointArc((35.948703812, 0), (36.836858206, -3.871377871), (39.552581276, -6.769865934))
            ThreePointArc((39.552581276, -6.769865934), (42.805320101, -10.94498561), (42.554027377, -16.231646763))
        make_face(mode=Mode.SUBTRACT)
    extrude(amount=CUT_EXTRUDE2_DEPTH, mode=Mode.SUBTRACT)

    # #10 Clearance Hole1 (through all)
    with Locations(Plane(origin=(55.733032799, -23.085378057, 7.234682), x_dir=(-1, 0, 0), z_dir=(0, 0, -1))):
        with Locations((0, 0)):
            f_10_clearance_hole1 = Hole(F_10_CLEARANCE_HOLE1_D / 2)

    # CirPattern1: #10 Clearance Hole1 ×8 about axis
    cirpattern1_axis = Axis((0, 0, 0), (0, 0, 1))
    for i in range(1, CIRPATTERN1_COUNT):
        add(f_10_clearance_hole1.rotate(cirpattern1_axis, i * 360 / CIRPATTERN1_COUNT), mode=Mode.SUBTRACT)

    # Sketch25 → Clearancing (cut)
    with BuildSketch(Plane(origin=(0, 0, 0), x_dir=(-1, 0, 0), z_dir=(0, 0, -1)).offset(CLEARANCING_START)):
        Circle(SKETCH25_R)
        with BuildLine():
            ThreePointArc((-39.485738347, -6.87785215), (-42.684264858, -10.983386498), (-42.437160346, -16.181936632))
            add(Edge.make_bspline(
                [(-42.437160346, -16.181936632), (-41.450328446, -18.501948894), (-40.287188075, -20.70386066), (-37.62426385, -24.882183045), (-36.1244575, -26.858578596), (-33.612918368, -29.647784963), (-32.727511557, -30.551787217), (-30.899288351, -32.26713978), (-29.954285679, -33.081629815), (-27.028415852, -35.398073541), (-24.957331886, -36.773902575), (-22.214143518, -38.277928099), (-21.657736444, -38.567871448), (-20.529077868, -39.125607363), (-19.957869924, -39.392805227), (-18.236811973, -40.153613466), (-17.074606136, -40.608998857), (-13.544408375, -41.82291337), (-11.1331575, -42.430323242), (-8.045152005, -42.931279628), (-7.423828634, -43.018467653), (-6.17358737, -43.166313281), (-5.545687994, -43.226778512), (-3.668882092, -43.366672694), (-2.421130233, -43.405411027), (1.311985825, -43.361475459), (3.787286298, -43.119848136), (7.47956464, -42.43089353), (8.712476258, -42.144649273), (11.128372813, -41.470614218), (12.31452175, -41.08278751), (15.808874803, -39.769919796), (18.053477953, -38.696639775), (21.289209419, -36.780985477), (22.349089848, -36.088250708), (24.383348169, -34.625595136), (25.362502881, -33.853290457), (28.188051648, -31.415612474), (29.923427118, -29.630442917), (31.900539288, -27.191684875), (32.287236817, -26.69215724), (33.03483793, -25.679954076), (33.395921295, -25.167211132), (34.441621812, -23.609372602), (35.088773016, -22.544710991), (36.882357275, -19.273503621), (37.882174946, -16.990390194), (38.875744828, -14.00270068), (39.061155114, -13.399331831), (39.402369545, -12.191519857), (39.558676578, -11.585611614), (39.985275792, -9.761961138), (40.441402975, -7.314651304), (40.674139412, -4.836063161), (40.763559938, -2.965202227), (40.779154388, -2.339591952), (40.781417609, -1.08432134), (40.76799572, -0.453052442), (40.627903307, 2.692390804), (40.286121576, 5.161443437), (39.43890774, 8.796132878), (39.100388573, 9.996140785), (38.308399323, 12.37248564), (37.852097598, 13.554391573), (36.333140039, 16.997228128), (35.119491675, 19.170506242), (33.001368487, 22.2498484), (32.245396403, 23.246004252), (31.033998954, 24.693258097), (30.616682544, 25.168342498), (29.765008734, 26.092546286), (29.329638676, 26.542937105), (27.105848432, 28.737227444), (25.177853658, 30.309665479), (22.580283298, 32.044782733), (22.051311937, 32.380188303), (20.974087609, 33.027312806), (20.424315753, 33.339806048), (18.760945416, 34.232685111), (17.631513907, 34.770110987), (14.183245166, 36.213360105), (11.805002439, 36.951757683), (8.729750366, 37.586018139), (8.107774126, 37.698555851), (6.863218919, 37.892276195), (6.240962177, 37.973521872), (4.374253461, 38.171221637), (1.88547224, 38.31227114), (-0.602985761, 38.211399864), (-2.469206159, 38.043607473), (-3.091259068, 37.972290691), (-4.335323004, 37.798308656), (-4.959105867, 37.695274824), (-8.05217871, 37.104825218), (-10.442064996, 36.396124759), (-13.903223174, 34.987468388), (-15.036178129, 34.459888971), (-16.703458261, 33.578668593), (-17.255286668, 33.26900823), (-18.337021034, 32.625547889), (-18.867738625, 32.291418051), (-21.471435266, 30.559817088), (-23.396215015, 28.98129219), (-25.602702171, 26.764423917), (-26.03392942, 26.30874761), (-26.875809699, 25.372259656), (-27.286623762, 24.891064324), (-28.473720562, 23.426447254), (-29.209796712, 22.416679591), (-31.255817918, 19.289573594), (-32.405286999, 17.075476116), (-33.791719154, 13.550670272), (-34.189829991, 12.359597052), (-34.85899573, 9.95467515), (-35.402182987, 7.524154989), (-35.69403317, 5.042564271), (-35.815892674, 3.161655555), (-35.840306869, 2.530241223), (-35.855853683, 1.267408077), (-35.845894895, 0.636088005), (-35.821796258, 0.004844883)],
                knots=[0, 0, 0, 0, 0.03125, 0.03125, 0.0625, 0.0625, 0.078125, 0.078125, 0.09375, 0.09375, 0.125, 0.125, 0.1328125, 0.1328125, 0.140625, 0.140625, 0.15625, 0.15625, 0.1875, 0.1875, 0.1953125, 0.1953125, 0.203125, 0.203125, 0.21875, 0.21875, 0.25, 0.25, 0.265625, 0.265625, 0.28125, 0.28125, 0.3125, 0.3125, 0.328125, 0.328125, 0.34375, 0.34375, 0.375, 0.375, 0.3828125, 0.3828125, 0.390625, 0.390625, 0.40625, 0.40625, 0.4375, 0.4375, 0.4453125, 0.4453125, 0.453125, 0.453125, 0.46875, 0.484375, 0.484375, 0.4921875, 0.4921875, 0.5, 0.5, 0.53125, 0.53125, 0.546875, 0.546875, 0.5625, 0.5625, 0.59375, 0.59375, 0.609375, 0.609375, 0.6171875, 0.6171875, 0.625, 0.625, 0.65625, 0.65625, 0.6640625, 0.6640625, 0.671875, 0.671875, 0.6875, 0.6875, 0.71875, 0.71875, 0.7265625, 0.7265625, 0.734375, 0.734375, 0.75, 0.765625, 0.765625, 0.7734375, 0.7734375, 0.78125, 0.78125, 0.8125, 0.8125, 0.828125, 0.828125, 0.8359375, 0.8359375, 0.84375, 0.84375, 0.875, 0.875, 0.8828125, 0.8828125, 0.890625, 0.890625, 0.90625, 0.90625, 0.9375, 0.9375, 0.953125, 0.953125, 0.96875, 0.984375, 0.984375, 0.9921875, 0.9921875, 1, 1, 1, 1], degree=3))
            ThreePointArc((-35.821796258, 0.004844883), (-36.724753226, -3.931055952), (-39.485738347, -6.87785215))
        make_face(mode=Mode.SUBTRACT)
    extrude(amount=CLEARANCING_DEPTH, mode=Mode.SUBTRACT)


solid = part.part
